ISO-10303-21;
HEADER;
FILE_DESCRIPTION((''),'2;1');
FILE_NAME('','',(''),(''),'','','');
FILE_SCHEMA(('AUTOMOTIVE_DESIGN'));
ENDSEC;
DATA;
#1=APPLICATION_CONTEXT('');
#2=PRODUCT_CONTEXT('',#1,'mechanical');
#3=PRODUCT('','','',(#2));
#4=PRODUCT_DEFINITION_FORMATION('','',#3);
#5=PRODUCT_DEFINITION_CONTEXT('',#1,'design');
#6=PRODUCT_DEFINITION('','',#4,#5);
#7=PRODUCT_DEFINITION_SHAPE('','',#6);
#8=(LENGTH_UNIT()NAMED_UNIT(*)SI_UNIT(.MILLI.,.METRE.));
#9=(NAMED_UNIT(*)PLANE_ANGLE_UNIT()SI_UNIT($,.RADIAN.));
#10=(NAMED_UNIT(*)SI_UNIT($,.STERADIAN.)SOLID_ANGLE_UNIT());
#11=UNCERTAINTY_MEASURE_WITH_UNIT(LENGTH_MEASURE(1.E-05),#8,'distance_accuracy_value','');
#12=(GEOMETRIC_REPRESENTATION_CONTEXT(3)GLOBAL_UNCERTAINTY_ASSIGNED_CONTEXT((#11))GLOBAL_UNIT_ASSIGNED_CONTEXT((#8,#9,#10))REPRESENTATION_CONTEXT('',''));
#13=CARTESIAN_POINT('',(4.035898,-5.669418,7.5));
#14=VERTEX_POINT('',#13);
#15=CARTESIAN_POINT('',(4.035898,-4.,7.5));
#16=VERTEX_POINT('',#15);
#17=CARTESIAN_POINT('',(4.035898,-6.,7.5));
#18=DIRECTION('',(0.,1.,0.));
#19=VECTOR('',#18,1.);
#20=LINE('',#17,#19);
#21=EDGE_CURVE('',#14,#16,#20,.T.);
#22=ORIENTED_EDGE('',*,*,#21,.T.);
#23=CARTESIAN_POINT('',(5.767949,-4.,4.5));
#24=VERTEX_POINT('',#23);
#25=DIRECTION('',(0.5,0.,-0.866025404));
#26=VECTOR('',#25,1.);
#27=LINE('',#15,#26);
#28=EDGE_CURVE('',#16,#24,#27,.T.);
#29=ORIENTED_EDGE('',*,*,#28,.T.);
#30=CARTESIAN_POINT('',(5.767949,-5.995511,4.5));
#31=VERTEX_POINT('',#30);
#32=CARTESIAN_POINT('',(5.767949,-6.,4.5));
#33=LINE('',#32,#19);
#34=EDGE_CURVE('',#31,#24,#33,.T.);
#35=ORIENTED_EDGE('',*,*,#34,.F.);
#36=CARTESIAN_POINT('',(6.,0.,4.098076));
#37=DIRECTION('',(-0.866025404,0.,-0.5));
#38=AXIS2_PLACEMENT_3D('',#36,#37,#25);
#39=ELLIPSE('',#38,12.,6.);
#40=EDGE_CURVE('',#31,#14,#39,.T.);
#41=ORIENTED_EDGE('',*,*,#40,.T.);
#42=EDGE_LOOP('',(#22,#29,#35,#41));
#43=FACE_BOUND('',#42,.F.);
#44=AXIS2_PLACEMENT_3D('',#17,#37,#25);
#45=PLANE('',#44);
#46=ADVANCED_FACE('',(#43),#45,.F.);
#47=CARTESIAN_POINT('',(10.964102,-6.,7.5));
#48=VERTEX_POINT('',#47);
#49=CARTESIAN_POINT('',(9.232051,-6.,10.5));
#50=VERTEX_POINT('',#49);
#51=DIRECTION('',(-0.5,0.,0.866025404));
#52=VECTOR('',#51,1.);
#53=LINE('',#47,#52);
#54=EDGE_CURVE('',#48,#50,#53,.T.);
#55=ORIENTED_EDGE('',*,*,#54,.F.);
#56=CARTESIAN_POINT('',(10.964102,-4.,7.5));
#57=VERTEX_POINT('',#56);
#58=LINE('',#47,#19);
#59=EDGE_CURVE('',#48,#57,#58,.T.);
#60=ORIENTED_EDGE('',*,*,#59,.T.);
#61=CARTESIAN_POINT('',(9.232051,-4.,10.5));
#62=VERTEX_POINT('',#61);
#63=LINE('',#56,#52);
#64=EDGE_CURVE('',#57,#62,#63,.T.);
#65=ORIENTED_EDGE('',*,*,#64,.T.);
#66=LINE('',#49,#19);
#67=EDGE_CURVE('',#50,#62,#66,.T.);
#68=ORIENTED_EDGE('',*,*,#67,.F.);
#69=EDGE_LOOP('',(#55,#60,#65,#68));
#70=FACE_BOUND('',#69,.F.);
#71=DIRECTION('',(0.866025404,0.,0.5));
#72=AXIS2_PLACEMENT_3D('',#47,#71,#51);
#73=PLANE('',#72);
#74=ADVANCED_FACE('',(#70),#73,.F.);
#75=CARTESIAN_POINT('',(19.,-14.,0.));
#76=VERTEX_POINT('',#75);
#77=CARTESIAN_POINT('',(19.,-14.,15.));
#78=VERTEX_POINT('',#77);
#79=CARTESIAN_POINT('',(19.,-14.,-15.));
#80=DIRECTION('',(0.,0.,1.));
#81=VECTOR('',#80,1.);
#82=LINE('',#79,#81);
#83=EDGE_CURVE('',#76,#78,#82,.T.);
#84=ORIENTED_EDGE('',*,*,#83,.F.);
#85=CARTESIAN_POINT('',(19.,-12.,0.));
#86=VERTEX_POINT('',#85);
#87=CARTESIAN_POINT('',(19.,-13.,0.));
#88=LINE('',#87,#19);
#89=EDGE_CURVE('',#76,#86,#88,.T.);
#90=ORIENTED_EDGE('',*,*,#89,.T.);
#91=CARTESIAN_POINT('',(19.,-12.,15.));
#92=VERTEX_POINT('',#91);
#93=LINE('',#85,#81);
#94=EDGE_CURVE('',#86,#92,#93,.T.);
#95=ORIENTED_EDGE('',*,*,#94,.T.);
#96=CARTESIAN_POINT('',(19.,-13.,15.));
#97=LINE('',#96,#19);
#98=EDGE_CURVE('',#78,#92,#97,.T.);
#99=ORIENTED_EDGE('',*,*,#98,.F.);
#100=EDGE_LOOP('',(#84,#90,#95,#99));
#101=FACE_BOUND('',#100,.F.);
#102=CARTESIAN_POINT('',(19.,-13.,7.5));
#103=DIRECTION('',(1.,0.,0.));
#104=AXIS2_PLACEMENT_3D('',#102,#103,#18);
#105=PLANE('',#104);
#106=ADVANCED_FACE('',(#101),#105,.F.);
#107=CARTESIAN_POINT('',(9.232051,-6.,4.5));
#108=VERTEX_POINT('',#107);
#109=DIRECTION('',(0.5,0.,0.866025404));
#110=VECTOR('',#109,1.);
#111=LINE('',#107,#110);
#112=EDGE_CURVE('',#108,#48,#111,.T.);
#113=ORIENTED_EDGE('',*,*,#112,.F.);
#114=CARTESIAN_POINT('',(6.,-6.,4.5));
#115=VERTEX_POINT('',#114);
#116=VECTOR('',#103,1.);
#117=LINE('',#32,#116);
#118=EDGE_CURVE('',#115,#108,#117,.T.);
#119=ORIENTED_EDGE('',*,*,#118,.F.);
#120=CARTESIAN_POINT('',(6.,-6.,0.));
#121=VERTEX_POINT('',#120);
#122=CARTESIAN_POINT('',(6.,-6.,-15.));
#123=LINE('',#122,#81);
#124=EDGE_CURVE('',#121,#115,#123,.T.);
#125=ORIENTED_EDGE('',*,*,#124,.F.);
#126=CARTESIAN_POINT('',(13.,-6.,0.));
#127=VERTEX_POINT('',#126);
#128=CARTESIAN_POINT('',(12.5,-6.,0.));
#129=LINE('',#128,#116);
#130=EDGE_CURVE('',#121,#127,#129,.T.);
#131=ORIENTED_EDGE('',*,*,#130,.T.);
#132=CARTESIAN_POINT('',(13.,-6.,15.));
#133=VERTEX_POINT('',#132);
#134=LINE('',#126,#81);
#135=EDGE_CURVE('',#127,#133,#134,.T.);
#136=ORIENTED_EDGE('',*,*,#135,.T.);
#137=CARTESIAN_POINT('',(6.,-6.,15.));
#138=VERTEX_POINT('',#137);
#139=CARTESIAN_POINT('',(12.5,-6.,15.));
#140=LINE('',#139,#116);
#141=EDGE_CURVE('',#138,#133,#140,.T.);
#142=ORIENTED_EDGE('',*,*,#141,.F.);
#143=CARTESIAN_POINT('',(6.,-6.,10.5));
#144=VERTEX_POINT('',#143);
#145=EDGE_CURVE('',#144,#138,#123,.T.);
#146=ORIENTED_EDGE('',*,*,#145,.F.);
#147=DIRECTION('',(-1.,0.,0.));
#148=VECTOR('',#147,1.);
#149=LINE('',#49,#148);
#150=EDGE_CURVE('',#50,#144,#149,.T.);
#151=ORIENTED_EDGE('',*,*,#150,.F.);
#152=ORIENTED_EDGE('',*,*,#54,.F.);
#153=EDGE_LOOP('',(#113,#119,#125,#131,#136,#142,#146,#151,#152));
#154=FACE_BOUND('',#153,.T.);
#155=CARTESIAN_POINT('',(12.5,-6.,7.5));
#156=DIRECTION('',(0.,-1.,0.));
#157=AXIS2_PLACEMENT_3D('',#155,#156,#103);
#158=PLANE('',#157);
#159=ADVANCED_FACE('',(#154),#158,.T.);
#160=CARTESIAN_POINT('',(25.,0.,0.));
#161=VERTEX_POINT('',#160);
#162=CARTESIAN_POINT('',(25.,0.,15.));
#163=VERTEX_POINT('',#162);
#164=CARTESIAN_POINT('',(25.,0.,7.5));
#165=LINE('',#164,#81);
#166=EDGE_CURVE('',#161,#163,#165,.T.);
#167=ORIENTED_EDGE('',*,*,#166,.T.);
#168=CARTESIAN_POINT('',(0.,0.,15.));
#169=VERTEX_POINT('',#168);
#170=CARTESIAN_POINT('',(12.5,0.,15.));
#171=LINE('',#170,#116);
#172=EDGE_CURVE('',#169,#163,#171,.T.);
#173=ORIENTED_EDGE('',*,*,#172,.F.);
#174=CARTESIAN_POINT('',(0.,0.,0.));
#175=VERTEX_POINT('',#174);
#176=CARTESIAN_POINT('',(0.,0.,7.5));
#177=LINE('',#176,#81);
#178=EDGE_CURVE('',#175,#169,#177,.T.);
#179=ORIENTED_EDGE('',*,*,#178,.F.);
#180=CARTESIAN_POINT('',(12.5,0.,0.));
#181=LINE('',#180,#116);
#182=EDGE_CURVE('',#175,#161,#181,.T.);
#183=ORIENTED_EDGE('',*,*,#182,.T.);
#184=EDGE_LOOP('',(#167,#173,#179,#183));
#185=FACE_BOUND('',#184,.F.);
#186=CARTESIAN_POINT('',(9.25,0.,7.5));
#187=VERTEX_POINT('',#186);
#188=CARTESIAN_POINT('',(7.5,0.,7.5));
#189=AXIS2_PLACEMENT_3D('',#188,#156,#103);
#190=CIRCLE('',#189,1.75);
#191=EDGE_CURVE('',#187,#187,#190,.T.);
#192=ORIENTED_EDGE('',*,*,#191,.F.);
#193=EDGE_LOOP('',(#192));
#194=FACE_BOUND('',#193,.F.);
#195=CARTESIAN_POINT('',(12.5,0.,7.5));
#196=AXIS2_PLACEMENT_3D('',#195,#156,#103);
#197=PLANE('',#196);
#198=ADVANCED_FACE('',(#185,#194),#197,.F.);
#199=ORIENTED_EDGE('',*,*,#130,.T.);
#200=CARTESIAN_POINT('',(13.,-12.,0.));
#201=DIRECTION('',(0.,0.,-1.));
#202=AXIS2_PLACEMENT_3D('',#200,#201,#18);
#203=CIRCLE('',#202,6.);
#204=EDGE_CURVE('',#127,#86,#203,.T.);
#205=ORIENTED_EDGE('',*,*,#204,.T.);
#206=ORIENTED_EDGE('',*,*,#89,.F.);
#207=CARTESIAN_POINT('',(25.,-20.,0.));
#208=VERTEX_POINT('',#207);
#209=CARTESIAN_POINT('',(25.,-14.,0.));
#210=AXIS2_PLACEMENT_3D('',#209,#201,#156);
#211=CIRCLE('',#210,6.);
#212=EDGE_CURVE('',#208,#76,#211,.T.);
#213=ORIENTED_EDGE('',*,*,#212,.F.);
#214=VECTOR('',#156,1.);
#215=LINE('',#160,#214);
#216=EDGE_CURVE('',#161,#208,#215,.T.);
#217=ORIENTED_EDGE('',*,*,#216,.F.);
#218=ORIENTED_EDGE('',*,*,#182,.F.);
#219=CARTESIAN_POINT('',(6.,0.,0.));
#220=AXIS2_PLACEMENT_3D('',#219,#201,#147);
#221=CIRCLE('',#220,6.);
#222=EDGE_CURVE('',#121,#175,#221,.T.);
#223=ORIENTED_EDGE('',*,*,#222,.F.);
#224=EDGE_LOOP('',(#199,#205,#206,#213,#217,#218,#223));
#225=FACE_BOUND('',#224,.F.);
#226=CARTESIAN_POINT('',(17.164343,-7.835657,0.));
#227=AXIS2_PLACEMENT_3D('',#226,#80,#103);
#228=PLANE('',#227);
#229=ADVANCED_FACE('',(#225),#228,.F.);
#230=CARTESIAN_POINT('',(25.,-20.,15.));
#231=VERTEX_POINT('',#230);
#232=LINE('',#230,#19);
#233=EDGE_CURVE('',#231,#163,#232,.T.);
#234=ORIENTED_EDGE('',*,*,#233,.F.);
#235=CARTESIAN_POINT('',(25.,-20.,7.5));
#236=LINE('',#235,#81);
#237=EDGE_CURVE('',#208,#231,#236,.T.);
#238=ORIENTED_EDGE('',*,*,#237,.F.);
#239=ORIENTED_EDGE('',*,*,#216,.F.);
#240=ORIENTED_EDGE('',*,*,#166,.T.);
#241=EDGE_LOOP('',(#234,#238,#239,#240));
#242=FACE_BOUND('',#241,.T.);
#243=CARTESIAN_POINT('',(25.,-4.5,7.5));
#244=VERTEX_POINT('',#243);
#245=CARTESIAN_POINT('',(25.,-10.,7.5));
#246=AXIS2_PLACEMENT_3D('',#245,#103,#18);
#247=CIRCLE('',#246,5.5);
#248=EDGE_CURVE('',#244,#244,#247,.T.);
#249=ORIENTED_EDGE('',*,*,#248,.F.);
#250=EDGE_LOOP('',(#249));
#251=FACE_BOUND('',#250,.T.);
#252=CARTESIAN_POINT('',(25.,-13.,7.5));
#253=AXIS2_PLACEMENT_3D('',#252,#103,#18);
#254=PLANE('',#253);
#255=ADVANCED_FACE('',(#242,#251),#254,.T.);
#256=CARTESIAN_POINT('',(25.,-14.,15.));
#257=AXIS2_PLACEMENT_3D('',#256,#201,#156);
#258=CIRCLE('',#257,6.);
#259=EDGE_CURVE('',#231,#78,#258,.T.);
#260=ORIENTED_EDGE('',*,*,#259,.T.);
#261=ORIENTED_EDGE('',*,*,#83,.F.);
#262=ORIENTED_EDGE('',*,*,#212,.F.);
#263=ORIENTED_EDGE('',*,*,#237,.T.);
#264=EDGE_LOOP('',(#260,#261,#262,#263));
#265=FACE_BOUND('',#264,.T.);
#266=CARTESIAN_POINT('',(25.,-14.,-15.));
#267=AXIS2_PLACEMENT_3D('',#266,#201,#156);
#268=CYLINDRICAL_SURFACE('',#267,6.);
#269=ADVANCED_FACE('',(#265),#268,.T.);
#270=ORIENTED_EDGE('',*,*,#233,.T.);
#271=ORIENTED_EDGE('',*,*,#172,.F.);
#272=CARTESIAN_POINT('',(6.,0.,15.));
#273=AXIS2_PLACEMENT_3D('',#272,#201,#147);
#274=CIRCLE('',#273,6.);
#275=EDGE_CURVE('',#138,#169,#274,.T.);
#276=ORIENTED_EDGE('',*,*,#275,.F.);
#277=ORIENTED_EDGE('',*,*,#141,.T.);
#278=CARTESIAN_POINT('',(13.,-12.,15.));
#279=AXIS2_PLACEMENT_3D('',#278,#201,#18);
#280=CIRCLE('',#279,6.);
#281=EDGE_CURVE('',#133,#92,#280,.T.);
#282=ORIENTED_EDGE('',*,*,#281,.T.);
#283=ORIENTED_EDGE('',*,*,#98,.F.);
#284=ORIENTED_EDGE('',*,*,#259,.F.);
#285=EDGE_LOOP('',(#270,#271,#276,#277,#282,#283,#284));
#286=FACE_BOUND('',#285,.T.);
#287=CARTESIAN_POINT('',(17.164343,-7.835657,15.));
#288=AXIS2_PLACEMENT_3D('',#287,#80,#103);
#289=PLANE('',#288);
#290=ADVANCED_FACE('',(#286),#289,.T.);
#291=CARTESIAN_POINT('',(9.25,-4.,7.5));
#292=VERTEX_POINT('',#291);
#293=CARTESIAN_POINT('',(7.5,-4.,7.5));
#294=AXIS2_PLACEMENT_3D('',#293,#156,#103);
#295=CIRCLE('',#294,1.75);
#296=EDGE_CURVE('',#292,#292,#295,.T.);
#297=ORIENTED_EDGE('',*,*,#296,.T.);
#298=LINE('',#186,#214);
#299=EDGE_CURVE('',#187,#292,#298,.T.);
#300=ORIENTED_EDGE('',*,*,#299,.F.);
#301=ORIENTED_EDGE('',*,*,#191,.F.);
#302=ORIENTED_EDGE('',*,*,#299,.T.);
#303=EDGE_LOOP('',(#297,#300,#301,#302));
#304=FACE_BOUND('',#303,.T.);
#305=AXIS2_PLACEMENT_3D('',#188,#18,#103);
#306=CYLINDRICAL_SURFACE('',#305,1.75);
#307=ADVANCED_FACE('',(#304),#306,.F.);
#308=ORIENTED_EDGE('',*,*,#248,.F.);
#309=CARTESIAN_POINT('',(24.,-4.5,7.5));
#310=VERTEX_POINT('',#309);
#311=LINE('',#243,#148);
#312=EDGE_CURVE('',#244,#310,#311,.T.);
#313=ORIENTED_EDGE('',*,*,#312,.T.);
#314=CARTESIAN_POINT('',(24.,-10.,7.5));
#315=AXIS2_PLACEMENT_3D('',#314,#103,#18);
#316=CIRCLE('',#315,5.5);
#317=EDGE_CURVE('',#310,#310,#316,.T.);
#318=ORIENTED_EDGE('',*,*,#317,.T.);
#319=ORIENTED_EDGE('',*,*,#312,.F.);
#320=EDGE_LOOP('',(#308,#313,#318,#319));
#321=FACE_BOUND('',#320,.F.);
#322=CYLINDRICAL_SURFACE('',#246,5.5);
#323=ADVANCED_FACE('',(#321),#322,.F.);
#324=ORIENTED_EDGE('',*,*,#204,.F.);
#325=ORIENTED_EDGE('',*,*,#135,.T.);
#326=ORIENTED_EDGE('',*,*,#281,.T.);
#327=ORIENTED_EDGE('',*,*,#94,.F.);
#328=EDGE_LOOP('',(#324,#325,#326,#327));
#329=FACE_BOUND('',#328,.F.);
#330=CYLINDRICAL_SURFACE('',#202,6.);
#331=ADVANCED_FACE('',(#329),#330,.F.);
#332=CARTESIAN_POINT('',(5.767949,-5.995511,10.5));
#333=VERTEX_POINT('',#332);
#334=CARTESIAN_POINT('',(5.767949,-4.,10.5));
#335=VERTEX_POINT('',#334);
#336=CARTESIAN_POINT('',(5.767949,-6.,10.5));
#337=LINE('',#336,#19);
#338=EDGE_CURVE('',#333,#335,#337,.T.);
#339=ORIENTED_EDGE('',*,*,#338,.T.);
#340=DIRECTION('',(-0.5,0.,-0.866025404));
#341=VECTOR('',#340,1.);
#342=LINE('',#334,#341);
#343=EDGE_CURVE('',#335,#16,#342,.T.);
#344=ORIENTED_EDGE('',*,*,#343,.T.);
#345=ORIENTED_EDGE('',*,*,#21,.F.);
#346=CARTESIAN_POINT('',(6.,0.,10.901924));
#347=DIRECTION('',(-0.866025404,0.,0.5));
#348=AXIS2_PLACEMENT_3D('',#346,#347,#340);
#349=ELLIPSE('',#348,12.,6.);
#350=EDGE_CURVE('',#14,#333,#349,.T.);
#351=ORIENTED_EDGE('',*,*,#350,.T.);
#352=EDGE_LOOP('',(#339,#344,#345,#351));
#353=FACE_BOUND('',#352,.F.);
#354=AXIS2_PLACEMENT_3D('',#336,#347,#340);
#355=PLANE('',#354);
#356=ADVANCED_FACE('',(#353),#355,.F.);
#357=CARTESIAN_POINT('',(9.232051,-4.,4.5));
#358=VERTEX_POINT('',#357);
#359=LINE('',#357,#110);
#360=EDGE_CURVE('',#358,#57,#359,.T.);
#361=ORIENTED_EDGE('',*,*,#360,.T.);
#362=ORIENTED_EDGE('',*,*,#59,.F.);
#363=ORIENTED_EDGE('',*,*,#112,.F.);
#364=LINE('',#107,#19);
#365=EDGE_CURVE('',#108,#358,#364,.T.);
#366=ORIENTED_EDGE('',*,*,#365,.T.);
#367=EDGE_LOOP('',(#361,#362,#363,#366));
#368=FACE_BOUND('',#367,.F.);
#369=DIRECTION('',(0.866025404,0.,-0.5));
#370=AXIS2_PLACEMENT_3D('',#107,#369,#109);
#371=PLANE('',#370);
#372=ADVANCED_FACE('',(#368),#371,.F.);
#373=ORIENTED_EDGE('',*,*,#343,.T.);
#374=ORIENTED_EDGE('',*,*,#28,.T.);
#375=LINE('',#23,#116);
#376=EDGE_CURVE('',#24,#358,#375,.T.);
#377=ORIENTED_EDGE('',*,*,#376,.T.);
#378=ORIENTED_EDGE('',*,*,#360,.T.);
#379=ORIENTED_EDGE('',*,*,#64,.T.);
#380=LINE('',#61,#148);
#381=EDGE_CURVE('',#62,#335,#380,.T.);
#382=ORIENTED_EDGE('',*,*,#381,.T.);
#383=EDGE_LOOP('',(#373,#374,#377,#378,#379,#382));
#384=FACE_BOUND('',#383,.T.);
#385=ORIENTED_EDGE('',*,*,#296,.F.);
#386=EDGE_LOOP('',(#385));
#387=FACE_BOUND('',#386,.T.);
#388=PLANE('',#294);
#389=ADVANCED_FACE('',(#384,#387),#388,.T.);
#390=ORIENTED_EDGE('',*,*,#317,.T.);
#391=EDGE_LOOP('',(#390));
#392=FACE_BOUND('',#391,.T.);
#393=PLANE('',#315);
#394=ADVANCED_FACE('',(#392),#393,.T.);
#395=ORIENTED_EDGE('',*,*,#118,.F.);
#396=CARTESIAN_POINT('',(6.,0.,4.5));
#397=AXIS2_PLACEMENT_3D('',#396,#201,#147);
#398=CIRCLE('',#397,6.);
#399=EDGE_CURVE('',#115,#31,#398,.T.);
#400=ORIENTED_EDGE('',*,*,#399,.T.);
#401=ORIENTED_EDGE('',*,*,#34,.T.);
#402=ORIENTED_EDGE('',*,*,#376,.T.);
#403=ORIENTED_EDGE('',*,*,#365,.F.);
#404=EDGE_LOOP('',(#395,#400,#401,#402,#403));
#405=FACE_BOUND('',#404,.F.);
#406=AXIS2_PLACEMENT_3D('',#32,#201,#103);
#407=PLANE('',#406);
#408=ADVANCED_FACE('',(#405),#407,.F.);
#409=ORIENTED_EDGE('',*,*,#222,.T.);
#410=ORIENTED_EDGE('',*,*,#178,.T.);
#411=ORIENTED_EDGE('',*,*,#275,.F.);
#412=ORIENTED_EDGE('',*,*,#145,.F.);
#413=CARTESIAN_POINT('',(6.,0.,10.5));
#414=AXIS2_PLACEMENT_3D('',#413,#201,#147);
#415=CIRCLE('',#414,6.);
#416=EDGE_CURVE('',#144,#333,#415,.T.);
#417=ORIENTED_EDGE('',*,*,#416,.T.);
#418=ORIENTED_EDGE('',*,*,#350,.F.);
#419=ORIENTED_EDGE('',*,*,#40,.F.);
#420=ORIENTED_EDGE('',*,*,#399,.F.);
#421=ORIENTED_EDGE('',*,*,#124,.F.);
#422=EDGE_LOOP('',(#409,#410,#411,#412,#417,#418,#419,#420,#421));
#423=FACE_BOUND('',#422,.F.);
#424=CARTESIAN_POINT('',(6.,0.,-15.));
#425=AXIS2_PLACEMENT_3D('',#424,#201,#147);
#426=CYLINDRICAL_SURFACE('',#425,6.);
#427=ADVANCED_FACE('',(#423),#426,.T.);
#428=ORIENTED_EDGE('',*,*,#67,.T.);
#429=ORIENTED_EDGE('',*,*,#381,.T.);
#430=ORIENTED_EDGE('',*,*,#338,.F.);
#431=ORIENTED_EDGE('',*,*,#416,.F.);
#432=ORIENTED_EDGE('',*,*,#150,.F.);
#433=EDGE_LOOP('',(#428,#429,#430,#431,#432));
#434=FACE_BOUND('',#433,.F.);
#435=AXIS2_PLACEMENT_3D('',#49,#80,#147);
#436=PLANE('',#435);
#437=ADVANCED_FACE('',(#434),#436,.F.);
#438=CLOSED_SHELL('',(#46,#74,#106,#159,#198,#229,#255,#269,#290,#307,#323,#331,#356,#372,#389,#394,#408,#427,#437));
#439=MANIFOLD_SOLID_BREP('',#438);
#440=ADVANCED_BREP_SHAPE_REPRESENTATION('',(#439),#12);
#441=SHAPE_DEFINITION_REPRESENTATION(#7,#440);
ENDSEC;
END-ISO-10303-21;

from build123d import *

# Parameters (mm, degrees)
F3_W         = 25
F3_H         = 15
F3_R         = 1.75
F4_DEPTH     = 6
F5_W         = 14
F5_H         = 15
F6_DEPTH     = 6
F7_R         = 5.5
F8_DEPTH     = 1
F9_R         = 1.75
F10_DEPTH    = 2
F11_T1_DEPTH = 15
F11_T3_DEPTH = 45


# Not quite as in the source:
# - a fillet or chamfer that OpenCascade refuses, or shapes differently, is made with other operations: its cross-section is extruded or revolved along the edge and cut away or added


with BuildPart() as f4:
    # F3 (on Front) → F4 (new body)
    with BuildSketch(Plane.XZ):
        with Locations((12.5, 7.5)):
            Rectangle(F3_W, F3_H)
        with Locations((7.5, 7.5)):
            Circle(F3_R, mode=Mode.SUBTRACT)
    extrude(amount=F4_DEPTH)

    # F5 (on face) → F6 (join)
    with BuildSketch(Plane.YZ.offset(25)):
        with Locations((-13, 7.5)):
            Rectangle(F5_W, F5_H)
    extrude(amount=-F6_DEPTH)

    # F7 (on face) → F8 (cut)
    with BuildSketch(Plane.YZ.offset(25)):
        with Locations((-10, 7.5)):
            Circle(F7_R)
    extrude(amount=-F8_DEPTH, mode=Mode.SUBTRACT)

    # F9 (on face) → F10 (cut)
    with BuildSketch(Plane.XZ.offset(6)):
        Polygon((10.9641016151, 7.5), (9.2320508076, 10.5), (5.7679491924, 10.5), (4.0358983849, 7.5), (5.7679491924, 4.5), (9.2320508076, 4.5), align=None)
        with Locations((7.5, 7.5)):
            Circle(F9_R, mode=Mode.SUBTRACT)
    extrude(amount=-F10_DEPTH, mode=Mode.SUBTRACT)

    # F11: fillet of radius 6 on 3 edges, made by hand

    # F11_s2 → F11_t1 (join)
    with BuildSketch(Plane.XY):
        with BuildLine():
            ThreePointArc((13, -6), (17.2426406871, -7.7573593129), (19, -12))
            Line((19, -12), (19, -6))
            Line((19, -6), (13, -6))
        make_face()
    extrude(amount=F11_T1_DEPTH)

    # F11_s4 → F11_t3 (cut)
    with BuildSketch(Plane.XY.offset(-15)):
        with BuildLine():
            ThreePointArc((0, 0), (1.7573593129, -4.2426406871), (6, -6))
            Line((6, -6), (0, -6))
            Line((0, -6), (0, 0))
        make_face()
        with BuildLine():
            ThreePointArc((25, -20), (20.7573593129, -18.2426406871), (19, -14))
            Line((19, -14), (19, -20))
            Line((19, -20), (25, -20))
        make_face()
    extrude(amount=F11_T3_DEPTH, mode=Mode.SUBTRACT)


solid = f4.part
